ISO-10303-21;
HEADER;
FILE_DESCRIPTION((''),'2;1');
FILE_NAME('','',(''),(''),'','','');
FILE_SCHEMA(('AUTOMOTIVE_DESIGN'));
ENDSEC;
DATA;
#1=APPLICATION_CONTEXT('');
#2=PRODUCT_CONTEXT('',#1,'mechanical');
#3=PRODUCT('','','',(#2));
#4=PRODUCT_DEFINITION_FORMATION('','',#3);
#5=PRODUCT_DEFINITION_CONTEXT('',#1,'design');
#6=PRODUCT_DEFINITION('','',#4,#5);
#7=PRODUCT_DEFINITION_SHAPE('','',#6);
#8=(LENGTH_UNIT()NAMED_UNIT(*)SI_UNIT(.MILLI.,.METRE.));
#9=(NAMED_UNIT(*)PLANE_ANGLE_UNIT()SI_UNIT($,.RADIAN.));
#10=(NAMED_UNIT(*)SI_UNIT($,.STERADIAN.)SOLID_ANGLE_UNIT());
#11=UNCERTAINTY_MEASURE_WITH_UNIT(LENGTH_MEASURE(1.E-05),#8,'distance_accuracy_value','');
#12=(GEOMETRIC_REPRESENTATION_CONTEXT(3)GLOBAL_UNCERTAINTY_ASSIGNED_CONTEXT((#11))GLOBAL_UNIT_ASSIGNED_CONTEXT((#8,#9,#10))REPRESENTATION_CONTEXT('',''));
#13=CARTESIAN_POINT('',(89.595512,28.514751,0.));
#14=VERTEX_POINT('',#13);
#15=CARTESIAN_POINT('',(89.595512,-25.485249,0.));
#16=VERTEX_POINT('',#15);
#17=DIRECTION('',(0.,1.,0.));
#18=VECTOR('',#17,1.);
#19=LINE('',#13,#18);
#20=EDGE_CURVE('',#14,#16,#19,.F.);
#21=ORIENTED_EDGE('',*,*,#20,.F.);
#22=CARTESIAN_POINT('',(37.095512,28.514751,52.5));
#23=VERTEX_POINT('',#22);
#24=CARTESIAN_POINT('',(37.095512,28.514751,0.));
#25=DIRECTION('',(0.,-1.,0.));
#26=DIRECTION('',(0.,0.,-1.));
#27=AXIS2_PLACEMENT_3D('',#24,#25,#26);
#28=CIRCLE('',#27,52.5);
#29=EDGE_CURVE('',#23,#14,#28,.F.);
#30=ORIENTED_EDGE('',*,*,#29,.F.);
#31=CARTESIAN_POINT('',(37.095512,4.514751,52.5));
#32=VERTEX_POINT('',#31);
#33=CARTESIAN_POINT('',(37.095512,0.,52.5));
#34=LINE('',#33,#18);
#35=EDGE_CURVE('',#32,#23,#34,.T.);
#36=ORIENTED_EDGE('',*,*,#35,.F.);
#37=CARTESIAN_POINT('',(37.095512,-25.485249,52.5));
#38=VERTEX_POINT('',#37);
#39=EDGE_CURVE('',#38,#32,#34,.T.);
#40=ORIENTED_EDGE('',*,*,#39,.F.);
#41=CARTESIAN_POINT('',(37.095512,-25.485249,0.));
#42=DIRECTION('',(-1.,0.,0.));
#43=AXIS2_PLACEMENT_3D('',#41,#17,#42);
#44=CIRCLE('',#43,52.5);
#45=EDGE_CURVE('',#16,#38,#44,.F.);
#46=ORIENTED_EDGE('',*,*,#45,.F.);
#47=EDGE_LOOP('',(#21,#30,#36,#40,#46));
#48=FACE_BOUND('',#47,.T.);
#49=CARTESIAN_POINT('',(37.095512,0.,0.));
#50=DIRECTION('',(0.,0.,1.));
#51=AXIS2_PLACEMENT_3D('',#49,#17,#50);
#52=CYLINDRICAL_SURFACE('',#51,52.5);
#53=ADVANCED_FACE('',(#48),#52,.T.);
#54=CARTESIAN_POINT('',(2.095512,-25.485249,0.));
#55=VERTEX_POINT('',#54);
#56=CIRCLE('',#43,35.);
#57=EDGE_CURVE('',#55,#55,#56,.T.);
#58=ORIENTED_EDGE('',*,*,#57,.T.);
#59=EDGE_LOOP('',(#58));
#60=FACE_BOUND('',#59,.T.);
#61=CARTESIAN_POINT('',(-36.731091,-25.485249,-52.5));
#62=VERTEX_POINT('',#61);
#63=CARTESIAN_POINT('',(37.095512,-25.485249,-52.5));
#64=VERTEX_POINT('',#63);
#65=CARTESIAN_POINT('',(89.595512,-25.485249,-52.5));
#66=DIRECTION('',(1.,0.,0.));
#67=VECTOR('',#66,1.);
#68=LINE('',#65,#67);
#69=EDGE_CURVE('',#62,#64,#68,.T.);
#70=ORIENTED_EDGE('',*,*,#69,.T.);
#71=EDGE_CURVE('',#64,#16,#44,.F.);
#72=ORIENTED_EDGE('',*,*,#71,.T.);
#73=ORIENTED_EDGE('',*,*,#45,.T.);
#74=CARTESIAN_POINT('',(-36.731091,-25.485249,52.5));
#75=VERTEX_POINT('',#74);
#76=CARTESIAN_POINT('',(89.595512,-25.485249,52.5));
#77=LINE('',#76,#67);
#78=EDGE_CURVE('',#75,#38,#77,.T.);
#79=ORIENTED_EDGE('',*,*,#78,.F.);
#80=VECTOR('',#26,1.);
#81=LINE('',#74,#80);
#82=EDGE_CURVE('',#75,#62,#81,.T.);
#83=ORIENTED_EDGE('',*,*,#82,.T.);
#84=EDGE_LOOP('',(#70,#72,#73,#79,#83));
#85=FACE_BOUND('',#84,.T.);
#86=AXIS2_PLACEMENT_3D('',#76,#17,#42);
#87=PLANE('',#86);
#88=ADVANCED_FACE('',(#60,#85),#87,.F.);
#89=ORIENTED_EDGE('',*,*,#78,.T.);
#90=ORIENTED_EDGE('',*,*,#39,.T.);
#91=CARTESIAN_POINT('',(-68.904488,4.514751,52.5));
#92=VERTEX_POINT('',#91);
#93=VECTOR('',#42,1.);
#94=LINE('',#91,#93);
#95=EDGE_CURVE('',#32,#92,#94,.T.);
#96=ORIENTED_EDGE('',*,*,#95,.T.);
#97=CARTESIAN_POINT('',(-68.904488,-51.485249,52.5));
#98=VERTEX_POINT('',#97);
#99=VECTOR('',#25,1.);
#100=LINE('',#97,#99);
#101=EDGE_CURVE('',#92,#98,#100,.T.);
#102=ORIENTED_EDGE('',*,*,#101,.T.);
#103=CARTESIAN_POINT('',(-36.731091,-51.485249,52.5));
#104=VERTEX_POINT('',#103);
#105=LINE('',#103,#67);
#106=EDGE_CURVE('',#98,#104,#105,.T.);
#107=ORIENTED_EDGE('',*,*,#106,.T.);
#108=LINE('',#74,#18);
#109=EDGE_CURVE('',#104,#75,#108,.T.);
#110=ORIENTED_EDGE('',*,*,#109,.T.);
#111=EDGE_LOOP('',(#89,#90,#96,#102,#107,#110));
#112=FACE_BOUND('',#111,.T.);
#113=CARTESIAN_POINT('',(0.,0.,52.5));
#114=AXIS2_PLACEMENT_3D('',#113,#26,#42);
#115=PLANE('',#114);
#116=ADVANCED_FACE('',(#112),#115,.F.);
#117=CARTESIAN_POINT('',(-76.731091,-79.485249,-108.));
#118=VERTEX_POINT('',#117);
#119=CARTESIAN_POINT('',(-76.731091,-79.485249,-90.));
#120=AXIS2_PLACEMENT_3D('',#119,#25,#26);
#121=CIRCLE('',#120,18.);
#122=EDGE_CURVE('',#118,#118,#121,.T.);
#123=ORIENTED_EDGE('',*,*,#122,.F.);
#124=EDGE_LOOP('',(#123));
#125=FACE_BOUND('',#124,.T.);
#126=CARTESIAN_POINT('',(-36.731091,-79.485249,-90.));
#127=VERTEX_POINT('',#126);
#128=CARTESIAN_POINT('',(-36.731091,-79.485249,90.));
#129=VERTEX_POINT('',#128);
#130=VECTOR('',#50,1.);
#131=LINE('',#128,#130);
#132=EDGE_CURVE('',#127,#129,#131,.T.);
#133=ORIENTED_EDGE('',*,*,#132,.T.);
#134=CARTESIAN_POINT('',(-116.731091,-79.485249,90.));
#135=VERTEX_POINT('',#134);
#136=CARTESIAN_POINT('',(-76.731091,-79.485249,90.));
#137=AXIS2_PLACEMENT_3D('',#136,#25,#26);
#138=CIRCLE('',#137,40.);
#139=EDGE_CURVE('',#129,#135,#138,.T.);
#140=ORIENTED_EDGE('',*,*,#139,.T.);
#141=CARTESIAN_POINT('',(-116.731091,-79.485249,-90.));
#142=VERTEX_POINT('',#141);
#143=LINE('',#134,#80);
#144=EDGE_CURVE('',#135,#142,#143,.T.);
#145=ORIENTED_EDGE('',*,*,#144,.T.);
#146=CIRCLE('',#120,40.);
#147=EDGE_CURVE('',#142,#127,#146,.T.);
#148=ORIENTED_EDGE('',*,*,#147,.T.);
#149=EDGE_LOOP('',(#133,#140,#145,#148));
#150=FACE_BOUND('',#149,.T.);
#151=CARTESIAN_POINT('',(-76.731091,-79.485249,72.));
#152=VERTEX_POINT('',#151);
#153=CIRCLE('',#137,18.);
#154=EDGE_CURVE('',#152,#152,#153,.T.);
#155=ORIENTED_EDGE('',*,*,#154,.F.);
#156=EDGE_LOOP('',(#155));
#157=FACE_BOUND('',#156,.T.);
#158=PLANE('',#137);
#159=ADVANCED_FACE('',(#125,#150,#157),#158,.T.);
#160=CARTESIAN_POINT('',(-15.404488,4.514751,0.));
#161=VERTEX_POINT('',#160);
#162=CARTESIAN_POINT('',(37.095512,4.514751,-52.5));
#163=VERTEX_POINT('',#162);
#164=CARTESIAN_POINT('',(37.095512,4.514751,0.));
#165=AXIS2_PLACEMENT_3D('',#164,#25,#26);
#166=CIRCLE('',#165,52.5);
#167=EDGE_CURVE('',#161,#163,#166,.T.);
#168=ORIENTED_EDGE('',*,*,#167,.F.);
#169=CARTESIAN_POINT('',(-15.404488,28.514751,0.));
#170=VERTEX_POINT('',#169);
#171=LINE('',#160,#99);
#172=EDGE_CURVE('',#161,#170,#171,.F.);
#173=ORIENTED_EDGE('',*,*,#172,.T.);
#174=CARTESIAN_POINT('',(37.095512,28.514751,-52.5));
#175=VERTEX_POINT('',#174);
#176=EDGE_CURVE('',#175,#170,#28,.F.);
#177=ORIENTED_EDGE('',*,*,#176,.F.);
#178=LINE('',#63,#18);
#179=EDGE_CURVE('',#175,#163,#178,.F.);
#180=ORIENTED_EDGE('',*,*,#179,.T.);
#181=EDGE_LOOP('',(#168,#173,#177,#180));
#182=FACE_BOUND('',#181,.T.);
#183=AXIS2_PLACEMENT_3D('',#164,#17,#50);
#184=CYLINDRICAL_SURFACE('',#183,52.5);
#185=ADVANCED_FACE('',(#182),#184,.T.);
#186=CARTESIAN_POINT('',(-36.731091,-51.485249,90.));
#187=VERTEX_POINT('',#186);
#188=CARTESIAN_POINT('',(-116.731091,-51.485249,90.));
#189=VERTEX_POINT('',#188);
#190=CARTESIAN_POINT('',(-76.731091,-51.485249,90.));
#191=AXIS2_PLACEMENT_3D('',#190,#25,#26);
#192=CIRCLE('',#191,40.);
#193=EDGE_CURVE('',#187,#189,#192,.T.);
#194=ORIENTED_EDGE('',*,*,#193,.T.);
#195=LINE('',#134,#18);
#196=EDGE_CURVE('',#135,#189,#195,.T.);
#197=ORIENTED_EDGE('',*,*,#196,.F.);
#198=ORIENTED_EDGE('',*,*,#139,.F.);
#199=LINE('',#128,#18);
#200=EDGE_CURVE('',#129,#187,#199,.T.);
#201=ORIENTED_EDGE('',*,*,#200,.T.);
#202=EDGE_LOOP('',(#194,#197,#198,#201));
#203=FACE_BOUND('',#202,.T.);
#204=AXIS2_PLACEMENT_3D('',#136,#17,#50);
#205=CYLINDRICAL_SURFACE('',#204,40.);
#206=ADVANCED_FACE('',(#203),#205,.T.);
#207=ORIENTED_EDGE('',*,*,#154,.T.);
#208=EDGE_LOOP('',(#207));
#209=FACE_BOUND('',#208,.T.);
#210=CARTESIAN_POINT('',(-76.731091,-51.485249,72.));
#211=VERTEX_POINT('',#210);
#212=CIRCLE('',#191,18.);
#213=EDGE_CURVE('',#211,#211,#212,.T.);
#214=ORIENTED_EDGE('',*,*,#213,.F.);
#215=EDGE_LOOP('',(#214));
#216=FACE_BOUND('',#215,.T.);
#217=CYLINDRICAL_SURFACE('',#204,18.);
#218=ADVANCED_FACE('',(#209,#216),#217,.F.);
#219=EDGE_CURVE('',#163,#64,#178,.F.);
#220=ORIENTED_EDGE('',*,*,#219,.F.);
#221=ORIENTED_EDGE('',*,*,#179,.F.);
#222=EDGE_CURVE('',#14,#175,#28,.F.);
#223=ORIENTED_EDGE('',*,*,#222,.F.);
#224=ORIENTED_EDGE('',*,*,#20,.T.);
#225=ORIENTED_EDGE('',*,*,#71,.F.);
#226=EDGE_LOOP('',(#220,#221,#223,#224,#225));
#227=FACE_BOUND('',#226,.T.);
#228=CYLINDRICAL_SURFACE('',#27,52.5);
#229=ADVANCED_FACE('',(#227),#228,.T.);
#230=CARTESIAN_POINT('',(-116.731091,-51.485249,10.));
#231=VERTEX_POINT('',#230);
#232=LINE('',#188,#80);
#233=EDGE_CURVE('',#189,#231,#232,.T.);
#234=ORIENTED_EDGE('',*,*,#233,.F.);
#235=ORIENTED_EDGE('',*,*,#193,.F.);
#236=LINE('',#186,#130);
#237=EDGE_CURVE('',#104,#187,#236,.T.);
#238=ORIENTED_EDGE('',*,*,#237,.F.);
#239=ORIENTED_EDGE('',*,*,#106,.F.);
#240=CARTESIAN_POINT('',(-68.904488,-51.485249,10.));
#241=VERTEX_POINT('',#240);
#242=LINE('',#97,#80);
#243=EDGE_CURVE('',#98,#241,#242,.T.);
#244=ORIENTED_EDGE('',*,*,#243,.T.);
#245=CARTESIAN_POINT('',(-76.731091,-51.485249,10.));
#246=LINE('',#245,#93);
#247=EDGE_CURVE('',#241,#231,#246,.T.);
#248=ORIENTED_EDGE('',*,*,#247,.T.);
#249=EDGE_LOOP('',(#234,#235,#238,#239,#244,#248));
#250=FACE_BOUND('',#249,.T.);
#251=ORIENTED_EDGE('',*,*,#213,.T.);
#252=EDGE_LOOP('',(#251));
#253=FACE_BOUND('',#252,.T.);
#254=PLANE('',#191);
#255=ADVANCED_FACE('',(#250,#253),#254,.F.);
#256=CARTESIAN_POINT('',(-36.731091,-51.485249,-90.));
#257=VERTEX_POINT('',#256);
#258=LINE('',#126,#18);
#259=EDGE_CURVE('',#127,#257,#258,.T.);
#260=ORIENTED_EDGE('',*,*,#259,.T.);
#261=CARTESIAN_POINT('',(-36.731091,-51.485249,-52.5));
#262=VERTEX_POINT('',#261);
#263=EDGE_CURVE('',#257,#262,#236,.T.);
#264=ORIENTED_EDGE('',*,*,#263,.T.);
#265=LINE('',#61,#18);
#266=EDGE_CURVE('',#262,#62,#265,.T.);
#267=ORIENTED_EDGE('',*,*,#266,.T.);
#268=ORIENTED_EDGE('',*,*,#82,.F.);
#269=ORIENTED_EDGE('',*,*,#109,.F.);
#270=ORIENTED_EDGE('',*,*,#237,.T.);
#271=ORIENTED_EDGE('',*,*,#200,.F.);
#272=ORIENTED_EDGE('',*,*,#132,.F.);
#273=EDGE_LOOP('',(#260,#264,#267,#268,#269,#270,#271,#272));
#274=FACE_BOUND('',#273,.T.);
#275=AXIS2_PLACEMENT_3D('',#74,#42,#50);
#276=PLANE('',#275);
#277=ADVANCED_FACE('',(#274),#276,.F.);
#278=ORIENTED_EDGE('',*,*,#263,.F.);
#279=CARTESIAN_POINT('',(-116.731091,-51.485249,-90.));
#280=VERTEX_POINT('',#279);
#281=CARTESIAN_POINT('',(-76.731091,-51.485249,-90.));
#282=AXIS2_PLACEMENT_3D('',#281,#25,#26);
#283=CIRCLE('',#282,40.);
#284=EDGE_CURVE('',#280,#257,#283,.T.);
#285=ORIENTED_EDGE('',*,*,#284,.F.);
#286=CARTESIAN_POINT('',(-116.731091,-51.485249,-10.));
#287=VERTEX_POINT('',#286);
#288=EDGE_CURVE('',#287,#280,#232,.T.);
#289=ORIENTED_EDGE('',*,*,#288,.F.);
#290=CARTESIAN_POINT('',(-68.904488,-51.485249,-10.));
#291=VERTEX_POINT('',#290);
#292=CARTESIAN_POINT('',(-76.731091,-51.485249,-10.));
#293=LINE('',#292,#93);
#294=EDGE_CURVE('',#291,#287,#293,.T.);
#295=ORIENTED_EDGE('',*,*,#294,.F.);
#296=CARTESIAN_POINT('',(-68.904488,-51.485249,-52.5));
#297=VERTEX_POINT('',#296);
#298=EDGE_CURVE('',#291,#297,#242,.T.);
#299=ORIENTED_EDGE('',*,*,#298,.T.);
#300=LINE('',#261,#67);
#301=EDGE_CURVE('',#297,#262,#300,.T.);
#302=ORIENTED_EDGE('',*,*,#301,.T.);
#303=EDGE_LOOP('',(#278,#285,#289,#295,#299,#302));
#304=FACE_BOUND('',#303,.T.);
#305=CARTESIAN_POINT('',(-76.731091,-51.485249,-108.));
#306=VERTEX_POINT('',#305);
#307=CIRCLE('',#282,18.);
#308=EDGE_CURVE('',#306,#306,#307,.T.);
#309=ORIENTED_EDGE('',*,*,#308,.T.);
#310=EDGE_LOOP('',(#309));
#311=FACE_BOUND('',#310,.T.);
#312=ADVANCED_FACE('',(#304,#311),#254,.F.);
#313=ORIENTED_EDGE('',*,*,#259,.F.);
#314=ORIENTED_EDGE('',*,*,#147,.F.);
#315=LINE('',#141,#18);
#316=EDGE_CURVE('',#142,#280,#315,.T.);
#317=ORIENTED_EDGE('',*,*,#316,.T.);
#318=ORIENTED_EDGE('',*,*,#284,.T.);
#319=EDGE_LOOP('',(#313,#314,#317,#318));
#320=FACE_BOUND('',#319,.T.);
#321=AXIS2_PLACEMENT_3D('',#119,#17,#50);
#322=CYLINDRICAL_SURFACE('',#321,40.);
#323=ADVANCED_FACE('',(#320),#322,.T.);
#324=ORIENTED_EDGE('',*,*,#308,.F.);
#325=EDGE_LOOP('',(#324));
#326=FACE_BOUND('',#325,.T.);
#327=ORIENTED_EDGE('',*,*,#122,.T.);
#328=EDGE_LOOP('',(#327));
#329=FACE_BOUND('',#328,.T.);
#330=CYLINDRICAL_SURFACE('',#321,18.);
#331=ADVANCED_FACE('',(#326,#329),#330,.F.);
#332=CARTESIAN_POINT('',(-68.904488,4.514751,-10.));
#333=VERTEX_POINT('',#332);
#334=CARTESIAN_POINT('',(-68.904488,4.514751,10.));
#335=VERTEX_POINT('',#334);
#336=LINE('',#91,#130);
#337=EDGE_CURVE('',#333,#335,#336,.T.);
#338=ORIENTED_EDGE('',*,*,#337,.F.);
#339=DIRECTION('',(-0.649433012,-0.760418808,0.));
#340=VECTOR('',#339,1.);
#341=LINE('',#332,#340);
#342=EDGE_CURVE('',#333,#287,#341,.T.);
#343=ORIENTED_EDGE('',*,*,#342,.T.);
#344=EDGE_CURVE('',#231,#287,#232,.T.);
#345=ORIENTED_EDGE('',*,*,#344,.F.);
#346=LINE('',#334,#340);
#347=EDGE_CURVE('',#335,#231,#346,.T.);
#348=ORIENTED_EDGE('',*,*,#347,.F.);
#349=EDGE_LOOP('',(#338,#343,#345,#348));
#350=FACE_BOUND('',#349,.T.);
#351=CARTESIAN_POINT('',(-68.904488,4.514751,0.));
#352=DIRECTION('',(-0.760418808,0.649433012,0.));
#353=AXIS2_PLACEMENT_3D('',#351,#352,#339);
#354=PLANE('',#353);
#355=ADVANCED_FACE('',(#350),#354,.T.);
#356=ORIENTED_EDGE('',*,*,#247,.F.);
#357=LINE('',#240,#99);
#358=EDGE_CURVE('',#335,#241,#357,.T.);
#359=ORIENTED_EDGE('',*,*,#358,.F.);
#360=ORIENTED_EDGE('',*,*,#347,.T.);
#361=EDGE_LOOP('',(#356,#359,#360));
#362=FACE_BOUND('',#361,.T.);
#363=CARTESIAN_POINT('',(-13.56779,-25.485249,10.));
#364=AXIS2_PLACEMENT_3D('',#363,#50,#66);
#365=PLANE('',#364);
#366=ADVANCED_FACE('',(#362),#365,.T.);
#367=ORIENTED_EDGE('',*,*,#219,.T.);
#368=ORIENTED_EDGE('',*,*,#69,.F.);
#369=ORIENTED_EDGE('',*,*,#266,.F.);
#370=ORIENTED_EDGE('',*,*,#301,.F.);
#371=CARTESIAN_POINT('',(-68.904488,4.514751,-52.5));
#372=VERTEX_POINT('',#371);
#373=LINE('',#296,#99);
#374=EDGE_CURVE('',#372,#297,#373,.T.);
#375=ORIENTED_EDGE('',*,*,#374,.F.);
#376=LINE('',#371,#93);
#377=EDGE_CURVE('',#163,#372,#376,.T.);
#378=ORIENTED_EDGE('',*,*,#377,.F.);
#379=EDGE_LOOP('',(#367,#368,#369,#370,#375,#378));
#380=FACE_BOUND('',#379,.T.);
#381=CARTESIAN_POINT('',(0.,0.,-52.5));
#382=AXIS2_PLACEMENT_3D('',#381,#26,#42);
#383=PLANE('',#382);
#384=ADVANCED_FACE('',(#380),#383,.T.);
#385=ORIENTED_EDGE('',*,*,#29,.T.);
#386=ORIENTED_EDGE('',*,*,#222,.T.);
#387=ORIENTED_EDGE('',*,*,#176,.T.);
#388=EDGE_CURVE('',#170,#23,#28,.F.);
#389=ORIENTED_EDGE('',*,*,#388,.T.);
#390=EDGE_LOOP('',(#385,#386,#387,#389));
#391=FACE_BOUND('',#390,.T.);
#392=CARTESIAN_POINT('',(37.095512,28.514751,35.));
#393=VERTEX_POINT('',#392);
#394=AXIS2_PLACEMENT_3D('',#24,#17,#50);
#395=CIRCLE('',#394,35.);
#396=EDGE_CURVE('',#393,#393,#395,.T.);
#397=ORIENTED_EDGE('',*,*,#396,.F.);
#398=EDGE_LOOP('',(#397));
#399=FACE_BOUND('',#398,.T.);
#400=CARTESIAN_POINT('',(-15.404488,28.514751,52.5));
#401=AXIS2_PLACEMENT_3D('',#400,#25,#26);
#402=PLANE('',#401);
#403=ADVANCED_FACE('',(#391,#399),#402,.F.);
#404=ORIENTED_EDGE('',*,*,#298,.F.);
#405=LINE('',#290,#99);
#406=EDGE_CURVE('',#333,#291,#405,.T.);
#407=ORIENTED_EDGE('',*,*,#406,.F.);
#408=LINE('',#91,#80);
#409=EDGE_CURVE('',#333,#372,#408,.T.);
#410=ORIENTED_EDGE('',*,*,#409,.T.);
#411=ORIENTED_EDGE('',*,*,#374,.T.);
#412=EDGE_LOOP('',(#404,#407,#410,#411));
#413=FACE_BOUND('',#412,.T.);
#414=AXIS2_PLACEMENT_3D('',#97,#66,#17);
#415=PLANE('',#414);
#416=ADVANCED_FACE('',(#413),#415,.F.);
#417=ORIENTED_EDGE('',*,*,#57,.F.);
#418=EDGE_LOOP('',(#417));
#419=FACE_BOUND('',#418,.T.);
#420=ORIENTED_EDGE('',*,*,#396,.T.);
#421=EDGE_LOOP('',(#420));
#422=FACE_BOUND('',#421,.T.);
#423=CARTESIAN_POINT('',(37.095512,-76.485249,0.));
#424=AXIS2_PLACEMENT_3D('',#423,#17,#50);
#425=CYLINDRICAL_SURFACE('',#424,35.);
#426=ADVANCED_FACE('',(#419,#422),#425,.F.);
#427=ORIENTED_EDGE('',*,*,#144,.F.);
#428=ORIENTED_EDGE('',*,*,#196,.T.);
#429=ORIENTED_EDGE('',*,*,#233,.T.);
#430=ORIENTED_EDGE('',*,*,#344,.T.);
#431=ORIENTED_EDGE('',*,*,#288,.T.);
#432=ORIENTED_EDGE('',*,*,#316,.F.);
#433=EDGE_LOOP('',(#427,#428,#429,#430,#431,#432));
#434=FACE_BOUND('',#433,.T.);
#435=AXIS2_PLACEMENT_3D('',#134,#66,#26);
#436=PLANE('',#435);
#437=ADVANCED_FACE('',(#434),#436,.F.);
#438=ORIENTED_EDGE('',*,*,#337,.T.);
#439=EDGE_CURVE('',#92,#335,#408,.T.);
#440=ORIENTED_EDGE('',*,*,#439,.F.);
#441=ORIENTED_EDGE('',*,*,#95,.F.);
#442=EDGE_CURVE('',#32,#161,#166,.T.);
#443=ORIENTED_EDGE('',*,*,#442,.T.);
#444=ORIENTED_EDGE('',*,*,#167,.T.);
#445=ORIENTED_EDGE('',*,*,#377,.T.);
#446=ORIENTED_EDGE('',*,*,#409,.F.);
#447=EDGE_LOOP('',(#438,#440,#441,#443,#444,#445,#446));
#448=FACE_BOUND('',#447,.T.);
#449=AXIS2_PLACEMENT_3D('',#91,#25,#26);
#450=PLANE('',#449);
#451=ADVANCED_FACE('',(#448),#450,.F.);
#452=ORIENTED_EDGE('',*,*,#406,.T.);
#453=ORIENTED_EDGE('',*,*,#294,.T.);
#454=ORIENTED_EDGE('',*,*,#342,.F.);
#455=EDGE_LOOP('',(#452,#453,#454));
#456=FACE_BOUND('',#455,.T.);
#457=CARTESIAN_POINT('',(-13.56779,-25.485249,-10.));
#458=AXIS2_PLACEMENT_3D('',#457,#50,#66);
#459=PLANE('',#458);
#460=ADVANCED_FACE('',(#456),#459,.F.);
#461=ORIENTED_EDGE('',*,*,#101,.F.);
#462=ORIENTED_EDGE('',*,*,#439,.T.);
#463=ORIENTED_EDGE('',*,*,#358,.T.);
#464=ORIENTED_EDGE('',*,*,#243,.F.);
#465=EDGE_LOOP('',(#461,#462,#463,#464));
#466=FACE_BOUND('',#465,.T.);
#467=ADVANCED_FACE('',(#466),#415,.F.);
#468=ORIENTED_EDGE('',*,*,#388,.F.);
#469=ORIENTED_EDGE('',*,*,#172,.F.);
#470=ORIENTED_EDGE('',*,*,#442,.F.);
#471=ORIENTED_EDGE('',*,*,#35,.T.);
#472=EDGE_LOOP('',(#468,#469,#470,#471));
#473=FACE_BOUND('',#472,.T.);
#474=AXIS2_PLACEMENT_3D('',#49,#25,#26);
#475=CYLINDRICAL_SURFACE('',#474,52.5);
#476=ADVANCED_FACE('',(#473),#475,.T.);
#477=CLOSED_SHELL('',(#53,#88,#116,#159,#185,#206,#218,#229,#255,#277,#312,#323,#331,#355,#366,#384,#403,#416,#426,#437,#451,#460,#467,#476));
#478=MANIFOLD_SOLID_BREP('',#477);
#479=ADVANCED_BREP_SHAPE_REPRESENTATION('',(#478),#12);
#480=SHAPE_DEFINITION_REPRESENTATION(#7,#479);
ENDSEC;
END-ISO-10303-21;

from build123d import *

# Parameters (mm, degrees)
EXTRUDE_1_DEPTH     = 52.5
FILLET_1_R          = 52.5
SKETCH_2_R          = 35
CUT_EXTRUDE_1_DEPTH = 105
SKETCH_3_R          = 18
EXTRUDE_2_DEPTH     = 28
RIB_1_REACH         = 193.948
SKETCH_5_WALL_W     = 459.539721034
SKETCH_5_WALL_H     = 20


with BuildPart() as part:
    # 스케치1 → 보스-돌출1 (new, symmetric)
    with BuildSketch(Plane.XY):
        Polygon((-68.904487954, -51.485249183), (-68.904487954, 4.514750817), (-15.404487954, 4.514750817), (-15.404487954, 28.514750817), (89.595512046, 28.514750817), (89.595512046, -25.485249183), (-36.731091279, -25.485249183), (-36.731091279, -51.485249183), align=None)
    extrude(amount=EXTRUDE_1_DEPTH, both=True)

    # 필렛1
    fillet_1_edges = [part.edges().sort_by_distance(p)[0] for p in [
        (-15.404487954, 16.514750817, -52.5),
        (-15.404487954, 16.514750817, 52.5),
        (89.595512046, 1.514750817, 52.5),
        (89.595512046, 1.514750817, -52.5),
    ]]
    fillet(fillet_1_edges, radius=FILLET_1_R - 0.0001)  # a hair under: the kernel refuses the full size

    # 스케치2 → 컷-돌출1 (cut)
    with BuildSketch(Plane(origin=(0, 28.514750817, 0), x_dir=(1, 0, 0), z_dir=(0, 1, 0))):
        with Locations(Location((37.095512046, 0, 0), (0, 0, 270))):
            Circle(SKETCH_2_R)
    extrude(amount=-CUT_EXTRUDE_1_DEPTH, mode=Mode.SUBTRACT)

    # 스케치3 → 보스-돌출2 (add)
    with BuildSketch(Plane.XZ.offset(51.485249183)):
        with BuildLine():
            Line((-36.731091279, 90), (-36.731091279, -90))
            ThreePointArc((-36.731091279, -90), (-76.731091279, -130), (-116.731091279, -90))
            Line((-116.731091279, -90), (-116.731091279, 90))
            ThreePointArc((-116.731091279, 90), (-76.731091279, 130), (-36.731091279, 90))
        make_face()
        with Locations(Location((-76.731091279, 90, 0), (0, 0, 270))):
            Circle(SKETCH_3_R, mode=Mode.SUBTRACT)
        with Locations(Location((-76.731091279, -90, 0), (0, 0, 270))):
            Circle(SKETCH_3_R, mode=Mode.SUBTRACT)
    extrude(amount=EXTRUDE_2_DEPTH)

    # 스케치5 wall → 보강대1 (add, up to next)
    with BuildSketch(Plane(origin=(-92.817789616, -23.485249183, 0), x_dir=(-0.649433011991, -0.76041880759, 0), z_dir=(0.76041880759, -0.649433011991, 0)), mode=Mode.PRIVATE) as rib_1_sk1:
        Rectangle(SKETCH_5_WALL_W, SKETCH_5_WALL_H)
    rib_1_tool1 = extrude(rib_1_sk1.sketch, amount=RIB_1_REACH, mode=Mode.PRIVATE) - part.part
    add(rib_1_tool1.solids().sort_by_distance((-92.817789616, -23.485249183, 0))[0])


solid = part.part
